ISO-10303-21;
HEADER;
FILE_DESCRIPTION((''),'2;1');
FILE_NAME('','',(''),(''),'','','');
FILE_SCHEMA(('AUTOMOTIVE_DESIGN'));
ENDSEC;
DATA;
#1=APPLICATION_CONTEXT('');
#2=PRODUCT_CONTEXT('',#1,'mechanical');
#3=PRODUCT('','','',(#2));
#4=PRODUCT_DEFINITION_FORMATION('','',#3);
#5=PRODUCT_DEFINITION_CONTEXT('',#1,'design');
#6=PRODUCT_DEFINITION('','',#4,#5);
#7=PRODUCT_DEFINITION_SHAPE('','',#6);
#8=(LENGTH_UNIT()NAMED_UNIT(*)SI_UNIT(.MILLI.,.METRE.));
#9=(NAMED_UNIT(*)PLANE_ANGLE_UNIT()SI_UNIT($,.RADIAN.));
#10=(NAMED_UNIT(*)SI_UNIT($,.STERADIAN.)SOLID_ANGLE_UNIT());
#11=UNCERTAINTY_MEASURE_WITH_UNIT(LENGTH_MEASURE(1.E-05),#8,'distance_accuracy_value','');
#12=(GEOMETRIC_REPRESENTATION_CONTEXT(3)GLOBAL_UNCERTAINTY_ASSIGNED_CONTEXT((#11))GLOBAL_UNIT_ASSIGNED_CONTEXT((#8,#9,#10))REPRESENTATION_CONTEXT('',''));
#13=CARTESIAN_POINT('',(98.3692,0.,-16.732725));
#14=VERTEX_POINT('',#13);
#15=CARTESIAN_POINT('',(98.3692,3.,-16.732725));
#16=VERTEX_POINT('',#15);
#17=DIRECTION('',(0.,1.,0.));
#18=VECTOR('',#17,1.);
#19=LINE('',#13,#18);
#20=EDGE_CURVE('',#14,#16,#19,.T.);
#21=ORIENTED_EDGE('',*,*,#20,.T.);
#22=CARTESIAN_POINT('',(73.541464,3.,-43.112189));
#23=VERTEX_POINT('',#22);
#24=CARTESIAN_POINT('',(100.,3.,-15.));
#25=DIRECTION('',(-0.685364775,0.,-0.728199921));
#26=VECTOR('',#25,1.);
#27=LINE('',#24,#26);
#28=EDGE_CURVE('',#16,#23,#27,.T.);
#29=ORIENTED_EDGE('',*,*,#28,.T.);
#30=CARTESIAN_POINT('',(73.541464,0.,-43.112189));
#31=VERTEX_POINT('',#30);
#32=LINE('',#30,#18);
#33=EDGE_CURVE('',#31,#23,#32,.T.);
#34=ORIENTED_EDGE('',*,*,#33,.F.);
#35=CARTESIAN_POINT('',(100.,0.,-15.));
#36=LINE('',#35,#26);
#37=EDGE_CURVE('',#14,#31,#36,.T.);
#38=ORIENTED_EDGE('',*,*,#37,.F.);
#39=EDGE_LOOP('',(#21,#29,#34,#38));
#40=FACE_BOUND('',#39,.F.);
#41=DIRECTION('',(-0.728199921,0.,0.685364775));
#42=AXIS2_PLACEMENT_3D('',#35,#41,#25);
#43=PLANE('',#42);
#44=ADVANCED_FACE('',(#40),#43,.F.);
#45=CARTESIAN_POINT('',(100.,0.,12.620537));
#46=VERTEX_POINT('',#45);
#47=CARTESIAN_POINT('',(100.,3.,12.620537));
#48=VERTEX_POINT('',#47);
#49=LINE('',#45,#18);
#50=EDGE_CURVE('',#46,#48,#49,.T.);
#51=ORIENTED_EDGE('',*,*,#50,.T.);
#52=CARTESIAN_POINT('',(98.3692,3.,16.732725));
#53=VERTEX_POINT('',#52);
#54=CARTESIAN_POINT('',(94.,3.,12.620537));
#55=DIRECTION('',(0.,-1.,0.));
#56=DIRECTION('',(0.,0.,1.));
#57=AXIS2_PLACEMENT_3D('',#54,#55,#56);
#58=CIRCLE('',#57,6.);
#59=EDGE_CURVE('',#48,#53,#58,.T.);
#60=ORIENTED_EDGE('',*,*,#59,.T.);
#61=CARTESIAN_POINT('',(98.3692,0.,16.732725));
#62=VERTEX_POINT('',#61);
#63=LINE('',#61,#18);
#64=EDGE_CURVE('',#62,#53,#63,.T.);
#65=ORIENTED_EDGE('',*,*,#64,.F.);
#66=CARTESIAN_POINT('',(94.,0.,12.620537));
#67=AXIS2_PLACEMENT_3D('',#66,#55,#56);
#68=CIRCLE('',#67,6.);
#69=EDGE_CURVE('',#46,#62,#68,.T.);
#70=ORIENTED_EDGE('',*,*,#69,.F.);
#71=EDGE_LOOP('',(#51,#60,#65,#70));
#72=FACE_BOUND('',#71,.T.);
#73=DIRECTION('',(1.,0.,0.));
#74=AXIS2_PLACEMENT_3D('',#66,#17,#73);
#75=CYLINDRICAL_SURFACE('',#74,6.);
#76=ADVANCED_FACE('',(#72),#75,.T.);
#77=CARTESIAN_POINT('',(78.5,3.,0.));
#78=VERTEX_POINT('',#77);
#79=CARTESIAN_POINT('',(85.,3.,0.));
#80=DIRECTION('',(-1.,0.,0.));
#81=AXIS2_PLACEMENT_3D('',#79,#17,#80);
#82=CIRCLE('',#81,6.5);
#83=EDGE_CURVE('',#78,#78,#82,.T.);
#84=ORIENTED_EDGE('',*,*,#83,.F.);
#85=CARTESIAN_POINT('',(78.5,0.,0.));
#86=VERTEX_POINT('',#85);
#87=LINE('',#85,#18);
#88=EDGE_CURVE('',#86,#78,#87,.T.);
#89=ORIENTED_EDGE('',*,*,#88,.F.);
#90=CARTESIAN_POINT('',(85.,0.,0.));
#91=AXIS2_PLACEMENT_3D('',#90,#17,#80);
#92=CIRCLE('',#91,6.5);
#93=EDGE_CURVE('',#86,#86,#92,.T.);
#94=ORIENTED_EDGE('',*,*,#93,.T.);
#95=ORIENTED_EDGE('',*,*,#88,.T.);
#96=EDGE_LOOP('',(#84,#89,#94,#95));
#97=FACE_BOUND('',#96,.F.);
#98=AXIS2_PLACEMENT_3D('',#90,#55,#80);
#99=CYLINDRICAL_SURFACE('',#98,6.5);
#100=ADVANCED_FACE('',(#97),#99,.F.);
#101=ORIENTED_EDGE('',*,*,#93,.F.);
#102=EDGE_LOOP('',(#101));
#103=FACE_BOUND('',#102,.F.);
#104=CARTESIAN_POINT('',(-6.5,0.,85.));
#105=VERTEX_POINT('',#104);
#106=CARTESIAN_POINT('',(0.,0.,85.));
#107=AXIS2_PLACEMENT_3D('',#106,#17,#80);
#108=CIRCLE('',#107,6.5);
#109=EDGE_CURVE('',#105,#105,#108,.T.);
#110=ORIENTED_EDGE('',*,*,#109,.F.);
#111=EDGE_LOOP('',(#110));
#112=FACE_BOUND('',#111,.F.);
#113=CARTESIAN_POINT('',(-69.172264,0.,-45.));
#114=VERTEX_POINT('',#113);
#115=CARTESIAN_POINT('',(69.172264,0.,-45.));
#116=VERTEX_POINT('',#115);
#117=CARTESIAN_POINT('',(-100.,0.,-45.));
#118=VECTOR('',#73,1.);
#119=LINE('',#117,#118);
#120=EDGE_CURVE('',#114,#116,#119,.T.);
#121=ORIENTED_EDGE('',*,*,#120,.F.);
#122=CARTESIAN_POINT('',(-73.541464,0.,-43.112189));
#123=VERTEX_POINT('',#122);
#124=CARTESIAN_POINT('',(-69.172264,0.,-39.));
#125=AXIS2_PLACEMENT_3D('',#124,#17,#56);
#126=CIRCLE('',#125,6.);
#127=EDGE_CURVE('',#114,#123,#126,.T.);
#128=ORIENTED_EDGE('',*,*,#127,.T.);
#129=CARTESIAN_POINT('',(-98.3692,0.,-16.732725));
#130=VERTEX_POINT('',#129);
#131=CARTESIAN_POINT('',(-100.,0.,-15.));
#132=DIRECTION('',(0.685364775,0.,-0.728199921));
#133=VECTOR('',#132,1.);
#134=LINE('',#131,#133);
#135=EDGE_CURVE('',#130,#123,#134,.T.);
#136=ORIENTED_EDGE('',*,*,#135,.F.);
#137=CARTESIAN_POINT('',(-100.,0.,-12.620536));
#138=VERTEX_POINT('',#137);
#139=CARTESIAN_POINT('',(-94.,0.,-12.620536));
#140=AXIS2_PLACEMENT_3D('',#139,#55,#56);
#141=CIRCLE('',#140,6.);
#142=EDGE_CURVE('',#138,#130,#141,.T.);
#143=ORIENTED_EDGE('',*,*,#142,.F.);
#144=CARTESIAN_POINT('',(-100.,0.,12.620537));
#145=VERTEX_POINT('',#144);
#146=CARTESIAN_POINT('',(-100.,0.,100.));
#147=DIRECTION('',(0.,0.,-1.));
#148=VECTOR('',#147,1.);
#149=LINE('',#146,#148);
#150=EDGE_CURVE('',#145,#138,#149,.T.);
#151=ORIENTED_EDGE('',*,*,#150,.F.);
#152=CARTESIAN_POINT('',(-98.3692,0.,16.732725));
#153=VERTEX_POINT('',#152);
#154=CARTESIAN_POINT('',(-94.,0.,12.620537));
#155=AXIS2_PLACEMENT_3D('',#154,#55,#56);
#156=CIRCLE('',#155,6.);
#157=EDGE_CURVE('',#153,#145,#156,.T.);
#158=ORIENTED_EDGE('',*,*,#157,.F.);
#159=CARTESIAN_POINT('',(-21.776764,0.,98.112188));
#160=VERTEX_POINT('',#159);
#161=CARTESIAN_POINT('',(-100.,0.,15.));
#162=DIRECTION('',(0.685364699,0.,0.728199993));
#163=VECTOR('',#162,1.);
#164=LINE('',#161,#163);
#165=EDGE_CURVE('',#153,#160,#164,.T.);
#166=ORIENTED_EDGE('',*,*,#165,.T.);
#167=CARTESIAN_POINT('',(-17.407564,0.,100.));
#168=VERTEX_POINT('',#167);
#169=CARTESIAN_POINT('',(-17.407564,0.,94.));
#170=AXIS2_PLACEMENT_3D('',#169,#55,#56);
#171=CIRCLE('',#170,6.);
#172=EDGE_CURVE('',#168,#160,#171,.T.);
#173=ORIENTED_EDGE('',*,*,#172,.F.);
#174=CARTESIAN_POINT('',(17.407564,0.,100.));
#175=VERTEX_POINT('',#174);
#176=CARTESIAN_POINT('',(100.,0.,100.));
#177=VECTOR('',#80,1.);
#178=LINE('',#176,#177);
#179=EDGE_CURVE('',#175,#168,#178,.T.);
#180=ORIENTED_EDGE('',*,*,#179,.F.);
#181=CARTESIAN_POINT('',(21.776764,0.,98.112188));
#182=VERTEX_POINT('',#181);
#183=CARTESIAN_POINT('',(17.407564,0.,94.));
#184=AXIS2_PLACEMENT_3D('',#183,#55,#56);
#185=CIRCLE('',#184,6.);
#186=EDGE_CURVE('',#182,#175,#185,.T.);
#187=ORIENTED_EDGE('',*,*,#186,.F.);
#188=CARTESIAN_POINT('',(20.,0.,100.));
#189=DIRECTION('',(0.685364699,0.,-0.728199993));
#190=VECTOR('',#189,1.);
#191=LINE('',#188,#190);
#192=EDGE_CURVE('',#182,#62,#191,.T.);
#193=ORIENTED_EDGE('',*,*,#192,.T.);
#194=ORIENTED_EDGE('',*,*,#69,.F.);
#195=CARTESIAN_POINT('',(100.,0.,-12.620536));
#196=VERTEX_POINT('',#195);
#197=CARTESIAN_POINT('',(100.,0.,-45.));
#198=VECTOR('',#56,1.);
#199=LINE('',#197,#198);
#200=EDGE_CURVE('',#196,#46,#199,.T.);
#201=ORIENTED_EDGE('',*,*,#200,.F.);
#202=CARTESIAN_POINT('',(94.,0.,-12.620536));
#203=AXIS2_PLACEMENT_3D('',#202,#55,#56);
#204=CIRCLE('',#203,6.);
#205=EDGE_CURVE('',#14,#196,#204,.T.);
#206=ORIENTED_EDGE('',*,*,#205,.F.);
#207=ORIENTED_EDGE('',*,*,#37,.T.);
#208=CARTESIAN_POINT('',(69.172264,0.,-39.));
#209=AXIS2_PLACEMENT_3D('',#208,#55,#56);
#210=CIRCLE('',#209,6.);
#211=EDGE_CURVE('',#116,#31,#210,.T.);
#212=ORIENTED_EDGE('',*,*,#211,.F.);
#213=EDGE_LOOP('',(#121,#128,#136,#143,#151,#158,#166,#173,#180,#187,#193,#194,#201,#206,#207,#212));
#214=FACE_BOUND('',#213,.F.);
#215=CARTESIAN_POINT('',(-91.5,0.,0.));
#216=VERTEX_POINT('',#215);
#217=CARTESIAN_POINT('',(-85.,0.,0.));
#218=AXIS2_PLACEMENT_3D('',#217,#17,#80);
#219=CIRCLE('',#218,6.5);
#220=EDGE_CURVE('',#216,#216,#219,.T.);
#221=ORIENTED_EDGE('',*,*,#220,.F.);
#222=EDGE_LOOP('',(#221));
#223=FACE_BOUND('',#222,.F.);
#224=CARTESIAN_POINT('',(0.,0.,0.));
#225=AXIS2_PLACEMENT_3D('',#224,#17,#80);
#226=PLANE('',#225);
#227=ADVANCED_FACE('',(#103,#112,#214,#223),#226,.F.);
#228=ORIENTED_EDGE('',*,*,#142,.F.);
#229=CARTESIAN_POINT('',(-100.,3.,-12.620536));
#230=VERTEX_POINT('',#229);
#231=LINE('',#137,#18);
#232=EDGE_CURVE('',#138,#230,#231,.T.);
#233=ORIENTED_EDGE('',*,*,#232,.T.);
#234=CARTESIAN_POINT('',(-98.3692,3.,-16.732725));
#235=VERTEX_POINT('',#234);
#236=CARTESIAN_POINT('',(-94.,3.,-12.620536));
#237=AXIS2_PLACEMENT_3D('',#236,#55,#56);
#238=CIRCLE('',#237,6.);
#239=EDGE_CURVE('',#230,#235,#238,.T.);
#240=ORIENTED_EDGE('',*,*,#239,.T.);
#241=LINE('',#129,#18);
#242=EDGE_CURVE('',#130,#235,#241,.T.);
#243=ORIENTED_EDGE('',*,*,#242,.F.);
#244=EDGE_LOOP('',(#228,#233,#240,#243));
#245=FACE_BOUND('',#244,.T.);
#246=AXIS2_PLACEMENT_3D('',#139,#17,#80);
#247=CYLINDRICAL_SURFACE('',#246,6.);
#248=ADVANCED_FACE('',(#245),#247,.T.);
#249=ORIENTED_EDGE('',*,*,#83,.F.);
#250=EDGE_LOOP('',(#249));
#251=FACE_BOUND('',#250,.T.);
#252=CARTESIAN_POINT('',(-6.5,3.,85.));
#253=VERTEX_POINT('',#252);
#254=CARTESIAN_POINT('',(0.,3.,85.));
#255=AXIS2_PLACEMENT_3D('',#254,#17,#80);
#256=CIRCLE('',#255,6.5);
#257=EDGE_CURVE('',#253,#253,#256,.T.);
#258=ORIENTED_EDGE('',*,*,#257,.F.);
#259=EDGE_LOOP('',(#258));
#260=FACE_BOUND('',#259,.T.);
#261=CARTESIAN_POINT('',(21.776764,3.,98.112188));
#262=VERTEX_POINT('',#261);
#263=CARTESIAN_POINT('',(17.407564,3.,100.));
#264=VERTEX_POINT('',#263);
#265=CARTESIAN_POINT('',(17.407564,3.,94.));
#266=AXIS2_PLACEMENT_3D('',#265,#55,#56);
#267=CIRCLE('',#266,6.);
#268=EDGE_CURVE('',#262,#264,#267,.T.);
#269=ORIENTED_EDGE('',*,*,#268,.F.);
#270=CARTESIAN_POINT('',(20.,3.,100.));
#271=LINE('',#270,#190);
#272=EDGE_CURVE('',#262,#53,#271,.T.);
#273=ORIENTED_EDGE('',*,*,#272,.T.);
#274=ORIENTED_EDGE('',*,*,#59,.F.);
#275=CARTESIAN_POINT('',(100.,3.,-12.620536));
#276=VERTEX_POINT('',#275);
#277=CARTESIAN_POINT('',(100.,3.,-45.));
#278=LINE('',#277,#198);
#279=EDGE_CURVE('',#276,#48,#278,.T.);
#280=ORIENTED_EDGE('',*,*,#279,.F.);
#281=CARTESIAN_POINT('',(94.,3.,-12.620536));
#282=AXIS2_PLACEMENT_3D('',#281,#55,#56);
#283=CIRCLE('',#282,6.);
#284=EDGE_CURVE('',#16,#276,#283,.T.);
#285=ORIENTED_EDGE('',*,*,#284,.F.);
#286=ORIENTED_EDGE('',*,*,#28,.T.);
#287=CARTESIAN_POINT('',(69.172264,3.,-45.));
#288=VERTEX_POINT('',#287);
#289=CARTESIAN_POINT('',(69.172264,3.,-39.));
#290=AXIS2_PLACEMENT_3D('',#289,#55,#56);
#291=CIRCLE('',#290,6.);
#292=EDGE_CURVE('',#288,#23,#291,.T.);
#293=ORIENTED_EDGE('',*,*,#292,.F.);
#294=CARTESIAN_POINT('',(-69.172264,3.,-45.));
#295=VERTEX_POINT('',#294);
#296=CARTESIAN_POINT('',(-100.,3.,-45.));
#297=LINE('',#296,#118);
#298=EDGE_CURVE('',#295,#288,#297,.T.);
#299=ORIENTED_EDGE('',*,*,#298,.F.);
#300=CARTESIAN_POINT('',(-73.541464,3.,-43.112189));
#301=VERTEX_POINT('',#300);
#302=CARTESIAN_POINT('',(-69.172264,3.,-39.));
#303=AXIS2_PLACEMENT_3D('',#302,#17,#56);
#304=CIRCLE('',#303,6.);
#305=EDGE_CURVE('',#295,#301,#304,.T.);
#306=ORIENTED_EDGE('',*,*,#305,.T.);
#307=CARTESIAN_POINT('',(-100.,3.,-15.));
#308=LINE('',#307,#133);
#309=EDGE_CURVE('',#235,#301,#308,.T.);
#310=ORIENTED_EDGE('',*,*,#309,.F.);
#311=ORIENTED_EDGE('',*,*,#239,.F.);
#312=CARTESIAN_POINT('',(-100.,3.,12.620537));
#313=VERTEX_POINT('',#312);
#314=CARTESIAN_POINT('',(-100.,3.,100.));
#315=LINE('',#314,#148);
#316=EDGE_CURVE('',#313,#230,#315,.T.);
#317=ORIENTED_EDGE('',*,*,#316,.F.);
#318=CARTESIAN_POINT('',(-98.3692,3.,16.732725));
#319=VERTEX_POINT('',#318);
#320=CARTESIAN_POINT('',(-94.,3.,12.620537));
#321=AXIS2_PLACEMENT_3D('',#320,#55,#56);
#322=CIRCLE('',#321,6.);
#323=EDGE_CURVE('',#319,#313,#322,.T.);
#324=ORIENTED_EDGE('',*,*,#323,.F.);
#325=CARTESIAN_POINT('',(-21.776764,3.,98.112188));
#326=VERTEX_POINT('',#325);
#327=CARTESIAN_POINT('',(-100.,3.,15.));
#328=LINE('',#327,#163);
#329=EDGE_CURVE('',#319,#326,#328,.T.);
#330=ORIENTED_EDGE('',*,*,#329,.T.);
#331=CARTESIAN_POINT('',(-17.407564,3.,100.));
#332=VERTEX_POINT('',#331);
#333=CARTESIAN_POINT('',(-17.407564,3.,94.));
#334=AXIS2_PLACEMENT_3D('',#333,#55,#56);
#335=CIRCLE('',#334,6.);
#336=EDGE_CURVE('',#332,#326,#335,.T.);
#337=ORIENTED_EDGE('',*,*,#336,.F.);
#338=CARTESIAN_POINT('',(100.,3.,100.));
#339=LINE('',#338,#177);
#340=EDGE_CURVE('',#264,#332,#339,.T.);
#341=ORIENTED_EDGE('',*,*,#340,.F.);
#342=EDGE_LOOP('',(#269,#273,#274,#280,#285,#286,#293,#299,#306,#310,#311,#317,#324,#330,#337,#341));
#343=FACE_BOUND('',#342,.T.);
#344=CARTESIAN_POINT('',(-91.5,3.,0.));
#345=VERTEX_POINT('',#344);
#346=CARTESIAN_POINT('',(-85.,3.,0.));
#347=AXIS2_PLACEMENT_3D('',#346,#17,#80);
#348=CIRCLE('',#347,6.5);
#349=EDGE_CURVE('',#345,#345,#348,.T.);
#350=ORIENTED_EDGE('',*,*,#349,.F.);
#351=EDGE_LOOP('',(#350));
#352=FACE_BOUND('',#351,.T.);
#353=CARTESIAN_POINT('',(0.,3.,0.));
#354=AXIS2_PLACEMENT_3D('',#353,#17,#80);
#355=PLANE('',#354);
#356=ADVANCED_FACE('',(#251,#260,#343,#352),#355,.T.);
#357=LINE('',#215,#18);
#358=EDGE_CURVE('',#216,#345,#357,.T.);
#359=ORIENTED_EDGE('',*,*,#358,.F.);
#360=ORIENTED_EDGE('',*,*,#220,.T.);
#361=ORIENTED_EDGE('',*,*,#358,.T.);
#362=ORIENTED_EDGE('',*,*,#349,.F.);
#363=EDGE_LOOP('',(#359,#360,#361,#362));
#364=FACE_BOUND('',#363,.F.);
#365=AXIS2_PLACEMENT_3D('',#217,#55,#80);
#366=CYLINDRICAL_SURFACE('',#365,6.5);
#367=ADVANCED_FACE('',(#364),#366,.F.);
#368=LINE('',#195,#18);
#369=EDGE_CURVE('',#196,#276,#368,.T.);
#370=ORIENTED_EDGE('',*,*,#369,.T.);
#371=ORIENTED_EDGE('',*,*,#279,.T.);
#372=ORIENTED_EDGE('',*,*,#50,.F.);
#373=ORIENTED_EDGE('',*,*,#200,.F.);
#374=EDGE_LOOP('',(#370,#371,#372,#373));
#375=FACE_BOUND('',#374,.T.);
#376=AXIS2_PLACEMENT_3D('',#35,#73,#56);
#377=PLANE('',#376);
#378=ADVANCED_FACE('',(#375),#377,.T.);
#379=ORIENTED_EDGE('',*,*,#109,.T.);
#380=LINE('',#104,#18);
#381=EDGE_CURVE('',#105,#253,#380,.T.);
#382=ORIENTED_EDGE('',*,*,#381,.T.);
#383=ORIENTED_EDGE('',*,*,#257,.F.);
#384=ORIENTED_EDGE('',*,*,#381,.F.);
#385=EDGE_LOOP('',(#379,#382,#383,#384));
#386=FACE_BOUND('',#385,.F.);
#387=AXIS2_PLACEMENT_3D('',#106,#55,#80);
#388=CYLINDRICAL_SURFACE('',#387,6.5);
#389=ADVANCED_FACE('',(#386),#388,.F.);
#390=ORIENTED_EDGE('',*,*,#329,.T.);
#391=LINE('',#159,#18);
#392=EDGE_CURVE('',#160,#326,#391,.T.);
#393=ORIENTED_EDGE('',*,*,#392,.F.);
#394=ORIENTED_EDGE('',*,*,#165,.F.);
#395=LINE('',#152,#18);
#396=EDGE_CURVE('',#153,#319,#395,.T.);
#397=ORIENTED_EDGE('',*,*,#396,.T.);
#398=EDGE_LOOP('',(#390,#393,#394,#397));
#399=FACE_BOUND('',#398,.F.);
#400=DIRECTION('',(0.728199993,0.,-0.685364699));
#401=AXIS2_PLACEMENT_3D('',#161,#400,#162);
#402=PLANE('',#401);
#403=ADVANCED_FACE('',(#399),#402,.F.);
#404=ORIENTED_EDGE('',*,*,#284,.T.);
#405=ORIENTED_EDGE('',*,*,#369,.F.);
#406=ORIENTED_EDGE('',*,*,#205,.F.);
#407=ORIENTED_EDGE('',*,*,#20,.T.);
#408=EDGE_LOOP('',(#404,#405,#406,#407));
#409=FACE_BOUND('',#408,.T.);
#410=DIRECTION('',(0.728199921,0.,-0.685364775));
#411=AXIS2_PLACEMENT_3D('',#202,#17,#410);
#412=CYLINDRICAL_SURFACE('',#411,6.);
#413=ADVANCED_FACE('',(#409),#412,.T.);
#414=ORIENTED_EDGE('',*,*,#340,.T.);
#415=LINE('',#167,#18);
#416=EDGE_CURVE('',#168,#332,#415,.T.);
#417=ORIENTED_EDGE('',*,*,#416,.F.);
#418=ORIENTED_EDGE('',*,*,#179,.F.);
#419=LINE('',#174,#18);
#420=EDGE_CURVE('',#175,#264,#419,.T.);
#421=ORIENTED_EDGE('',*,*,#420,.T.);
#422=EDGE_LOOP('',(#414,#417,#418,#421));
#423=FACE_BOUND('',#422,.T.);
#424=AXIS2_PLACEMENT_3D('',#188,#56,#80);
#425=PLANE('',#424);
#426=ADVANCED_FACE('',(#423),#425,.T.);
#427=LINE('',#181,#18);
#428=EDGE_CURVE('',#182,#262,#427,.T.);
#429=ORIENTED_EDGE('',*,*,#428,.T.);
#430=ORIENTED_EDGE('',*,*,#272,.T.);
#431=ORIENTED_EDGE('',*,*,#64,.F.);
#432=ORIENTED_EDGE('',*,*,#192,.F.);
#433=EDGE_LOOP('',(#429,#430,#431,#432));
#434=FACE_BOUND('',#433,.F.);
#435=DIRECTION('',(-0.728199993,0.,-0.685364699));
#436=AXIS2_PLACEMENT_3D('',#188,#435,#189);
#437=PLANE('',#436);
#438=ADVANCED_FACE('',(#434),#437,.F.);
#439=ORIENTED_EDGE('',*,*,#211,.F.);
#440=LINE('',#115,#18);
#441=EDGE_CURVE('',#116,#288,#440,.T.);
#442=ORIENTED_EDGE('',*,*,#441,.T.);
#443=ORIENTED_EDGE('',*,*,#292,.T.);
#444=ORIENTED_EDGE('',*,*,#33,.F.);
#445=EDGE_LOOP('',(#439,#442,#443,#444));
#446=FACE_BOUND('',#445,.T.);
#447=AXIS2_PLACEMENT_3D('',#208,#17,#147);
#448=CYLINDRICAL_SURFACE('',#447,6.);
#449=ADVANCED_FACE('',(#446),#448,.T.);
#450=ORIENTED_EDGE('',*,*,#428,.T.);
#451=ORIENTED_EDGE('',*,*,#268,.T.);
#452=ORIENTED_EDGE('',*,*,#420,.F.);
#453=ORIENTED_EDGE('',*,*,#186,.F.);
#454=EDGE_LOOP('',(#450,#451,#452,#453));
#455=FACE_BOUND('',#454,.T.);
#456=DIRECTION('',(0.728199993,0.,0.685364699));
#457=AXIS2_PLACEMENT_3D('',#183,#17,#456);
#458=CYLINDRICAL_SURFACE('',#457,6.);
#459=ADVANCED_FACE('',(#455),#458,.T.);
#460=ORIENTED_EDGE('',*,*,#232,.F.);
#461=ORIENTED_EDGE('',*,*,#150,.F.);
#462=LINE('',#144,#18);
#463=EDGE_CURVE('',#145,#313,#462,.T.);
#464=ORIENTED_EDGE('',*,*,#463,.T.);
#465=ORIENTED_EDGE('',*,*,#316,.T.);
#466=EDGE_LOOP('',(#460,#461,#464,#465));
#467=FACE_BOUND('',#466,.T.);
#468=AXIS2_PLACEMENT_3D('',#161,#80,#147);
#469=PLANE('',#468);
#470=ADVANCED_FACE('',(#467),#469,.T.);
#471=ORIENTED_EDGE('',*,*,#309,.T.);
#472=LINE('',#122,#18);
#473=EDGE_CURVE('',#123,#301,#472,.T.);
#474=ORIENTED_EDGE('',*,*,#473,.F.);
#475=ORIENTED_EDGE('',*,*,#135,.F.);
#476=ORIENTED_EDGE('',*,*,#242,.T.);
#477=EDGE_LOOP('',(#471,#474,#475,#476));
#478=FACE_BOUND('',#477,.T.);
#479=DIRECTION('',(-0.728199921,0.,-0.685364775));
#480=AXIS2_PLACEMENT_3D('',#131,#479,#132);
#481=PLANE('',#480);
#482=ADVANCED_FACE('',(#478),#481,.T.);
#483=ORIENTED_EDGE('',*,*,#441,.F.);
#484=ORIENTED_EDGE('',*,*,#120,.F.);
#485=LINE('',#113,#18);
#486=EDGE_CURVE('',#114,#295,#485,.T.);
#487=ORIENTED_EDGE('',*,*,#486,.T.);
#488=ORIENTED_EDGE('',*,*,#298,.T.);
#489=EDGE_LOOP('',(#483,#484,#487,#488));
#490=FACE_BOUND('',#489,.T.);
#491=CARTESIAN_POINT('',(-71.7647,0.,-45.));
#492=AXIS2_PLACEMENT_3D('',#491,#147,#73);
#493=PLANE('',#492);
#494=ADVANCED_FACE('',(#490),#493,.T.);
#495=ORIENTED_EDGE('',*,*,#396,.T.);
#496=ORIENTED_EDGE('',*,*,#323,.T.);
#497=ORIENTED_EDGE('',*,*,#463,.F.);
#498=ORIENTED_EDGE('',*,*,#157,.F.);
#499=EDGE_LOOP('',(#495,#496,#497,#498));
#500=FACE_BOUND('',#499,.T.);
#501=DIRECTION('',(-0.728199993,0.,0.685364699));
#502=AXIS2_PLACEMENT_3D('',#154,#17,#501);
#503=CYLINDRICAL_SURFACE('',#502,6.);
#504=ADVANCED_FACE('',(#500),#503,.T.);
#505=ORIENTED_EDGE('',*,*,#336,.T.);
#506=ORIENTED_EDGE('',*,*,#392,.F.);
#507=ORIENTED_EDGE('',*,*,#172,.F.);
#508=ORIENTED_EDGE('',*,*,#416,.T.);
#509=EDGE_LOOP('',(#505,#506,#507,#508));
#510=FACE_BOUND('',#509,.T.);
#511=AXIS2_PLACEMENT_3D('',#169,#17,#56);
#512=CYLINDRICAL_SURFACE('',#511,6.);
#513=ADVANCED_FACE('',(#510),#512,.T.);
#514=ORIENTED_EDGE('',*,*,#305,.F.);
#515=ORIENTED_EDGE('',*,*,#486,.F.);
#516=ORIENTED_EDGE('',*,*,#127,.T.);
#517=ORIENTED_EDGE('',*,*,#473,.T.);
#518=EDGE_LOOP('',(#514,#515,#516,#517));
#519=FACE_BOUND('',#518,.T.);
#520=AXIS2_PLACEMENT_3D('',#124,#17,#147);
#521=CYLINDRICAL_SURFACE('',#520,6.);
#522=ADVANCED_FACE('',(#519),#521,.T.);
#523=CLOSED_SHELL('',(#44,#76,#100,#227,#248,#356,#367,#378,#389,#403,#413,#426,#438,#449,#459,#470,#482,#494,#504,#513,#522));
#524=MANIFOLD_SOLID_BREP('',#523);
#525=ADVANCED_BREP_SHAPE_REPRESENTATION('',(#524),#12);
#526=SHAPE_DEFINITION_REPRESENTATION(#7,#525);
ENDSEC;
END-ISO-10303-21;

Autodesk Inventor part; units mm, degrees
ref_plane "YZ Plane" through (0, 0, 0) normal (1, 0, 0) x (0, 1, 0)
ref_plane "XZ Plane" through (0, 0, 0) normal (0, 1, 0) x (-1, 0, 0)
ref_plane "XY Plane" through (0, 0, 0) normal (0, 0, 1) x (1, 0, 0)
sketch "Sketch1" plane through (0, 0, 0) normal (0, 1, 0) x (-1, 0, 0)
  line L0 (40, 40) -> (-40, 40) construction
  line L1 (-40, 40) -> (-40, -40) construction
  line L2 (-40, -40) -> (40, -40) construction
  line L3 (40, -40) -> (40, 40) construction
  line L4 (-40, 40) -> (40, -40) construction
  line L5 (100, -45) -> (-100, -45)
  line L6 (-100, -45) -> (-100, 100)
  line L7 (-100, 100) -> (100, 100)
  line L8 (100, 100) -> (100, -45)
  circle A0 centre (85, 0) radius 6.5
  circle A1 centre (0, 85) radius 6.5
  circle A2 centre (-85, 0) radius 6.5
  line L9 (0, 40) -> (0, -40) construction
  line L10 (100, 15) -> (20, 100)
  line L11 (-20, 100) -> (-100, 15)
  line L12 (100, -15) -> (71.7647, -45)
  line L13 (-100, -15) -> (-71.7647, -45)
  line L14 (0, 0) -> (-40, 0) construction
  point P0 (0, 0)
  point P1 (0, 0)
  dimension "d2" = 80
  dimension "d3" = 80
  dimension "d17" = 5
  dimension "d18" = 13
  dimension "d19" = 45
  dimension "d20" = 45
  dimension "d21" = 40
  dimension "d22" = 15
  dimension "d23" = 15
  dimension "d24" = 30
extrude "Plate1" add sketch "Sketch1" along normal blind 3 contours L5 L13 L6 L11 L7 L10 L8 L12
fillet "Corner Round2" radius 6 8 edges at (-20, 1.5, 100) (20, 1.5, 100) (100, 1.5, 15) (100, 1.5, -15) (71.7647, 1.5, -45) (-100, 1.5, 15) (-100, 1.5, -15) (-71.7647, 1.5, -45)
equation "\"d20\" = d19"
equation "\"d23\" = d22"
equation "\"BendReliefWidth\" = Thickness"
equation "\"BendReliefDepth\" = 0.5 * Thickness"
equation "\"CornerReliefSize\" = 4 * Thickness"
equation "\"MinimumRemnant\" = 2 * Thickness"
equation "\"TransitionRadius\" = BendRadius"
equation "\"JacobiRadiusSize\" = BendRadius"
equation "\"GapSize\" = Thickness"
properties part number "MSC 907 flange frame heel" material "Stainless Steel"
